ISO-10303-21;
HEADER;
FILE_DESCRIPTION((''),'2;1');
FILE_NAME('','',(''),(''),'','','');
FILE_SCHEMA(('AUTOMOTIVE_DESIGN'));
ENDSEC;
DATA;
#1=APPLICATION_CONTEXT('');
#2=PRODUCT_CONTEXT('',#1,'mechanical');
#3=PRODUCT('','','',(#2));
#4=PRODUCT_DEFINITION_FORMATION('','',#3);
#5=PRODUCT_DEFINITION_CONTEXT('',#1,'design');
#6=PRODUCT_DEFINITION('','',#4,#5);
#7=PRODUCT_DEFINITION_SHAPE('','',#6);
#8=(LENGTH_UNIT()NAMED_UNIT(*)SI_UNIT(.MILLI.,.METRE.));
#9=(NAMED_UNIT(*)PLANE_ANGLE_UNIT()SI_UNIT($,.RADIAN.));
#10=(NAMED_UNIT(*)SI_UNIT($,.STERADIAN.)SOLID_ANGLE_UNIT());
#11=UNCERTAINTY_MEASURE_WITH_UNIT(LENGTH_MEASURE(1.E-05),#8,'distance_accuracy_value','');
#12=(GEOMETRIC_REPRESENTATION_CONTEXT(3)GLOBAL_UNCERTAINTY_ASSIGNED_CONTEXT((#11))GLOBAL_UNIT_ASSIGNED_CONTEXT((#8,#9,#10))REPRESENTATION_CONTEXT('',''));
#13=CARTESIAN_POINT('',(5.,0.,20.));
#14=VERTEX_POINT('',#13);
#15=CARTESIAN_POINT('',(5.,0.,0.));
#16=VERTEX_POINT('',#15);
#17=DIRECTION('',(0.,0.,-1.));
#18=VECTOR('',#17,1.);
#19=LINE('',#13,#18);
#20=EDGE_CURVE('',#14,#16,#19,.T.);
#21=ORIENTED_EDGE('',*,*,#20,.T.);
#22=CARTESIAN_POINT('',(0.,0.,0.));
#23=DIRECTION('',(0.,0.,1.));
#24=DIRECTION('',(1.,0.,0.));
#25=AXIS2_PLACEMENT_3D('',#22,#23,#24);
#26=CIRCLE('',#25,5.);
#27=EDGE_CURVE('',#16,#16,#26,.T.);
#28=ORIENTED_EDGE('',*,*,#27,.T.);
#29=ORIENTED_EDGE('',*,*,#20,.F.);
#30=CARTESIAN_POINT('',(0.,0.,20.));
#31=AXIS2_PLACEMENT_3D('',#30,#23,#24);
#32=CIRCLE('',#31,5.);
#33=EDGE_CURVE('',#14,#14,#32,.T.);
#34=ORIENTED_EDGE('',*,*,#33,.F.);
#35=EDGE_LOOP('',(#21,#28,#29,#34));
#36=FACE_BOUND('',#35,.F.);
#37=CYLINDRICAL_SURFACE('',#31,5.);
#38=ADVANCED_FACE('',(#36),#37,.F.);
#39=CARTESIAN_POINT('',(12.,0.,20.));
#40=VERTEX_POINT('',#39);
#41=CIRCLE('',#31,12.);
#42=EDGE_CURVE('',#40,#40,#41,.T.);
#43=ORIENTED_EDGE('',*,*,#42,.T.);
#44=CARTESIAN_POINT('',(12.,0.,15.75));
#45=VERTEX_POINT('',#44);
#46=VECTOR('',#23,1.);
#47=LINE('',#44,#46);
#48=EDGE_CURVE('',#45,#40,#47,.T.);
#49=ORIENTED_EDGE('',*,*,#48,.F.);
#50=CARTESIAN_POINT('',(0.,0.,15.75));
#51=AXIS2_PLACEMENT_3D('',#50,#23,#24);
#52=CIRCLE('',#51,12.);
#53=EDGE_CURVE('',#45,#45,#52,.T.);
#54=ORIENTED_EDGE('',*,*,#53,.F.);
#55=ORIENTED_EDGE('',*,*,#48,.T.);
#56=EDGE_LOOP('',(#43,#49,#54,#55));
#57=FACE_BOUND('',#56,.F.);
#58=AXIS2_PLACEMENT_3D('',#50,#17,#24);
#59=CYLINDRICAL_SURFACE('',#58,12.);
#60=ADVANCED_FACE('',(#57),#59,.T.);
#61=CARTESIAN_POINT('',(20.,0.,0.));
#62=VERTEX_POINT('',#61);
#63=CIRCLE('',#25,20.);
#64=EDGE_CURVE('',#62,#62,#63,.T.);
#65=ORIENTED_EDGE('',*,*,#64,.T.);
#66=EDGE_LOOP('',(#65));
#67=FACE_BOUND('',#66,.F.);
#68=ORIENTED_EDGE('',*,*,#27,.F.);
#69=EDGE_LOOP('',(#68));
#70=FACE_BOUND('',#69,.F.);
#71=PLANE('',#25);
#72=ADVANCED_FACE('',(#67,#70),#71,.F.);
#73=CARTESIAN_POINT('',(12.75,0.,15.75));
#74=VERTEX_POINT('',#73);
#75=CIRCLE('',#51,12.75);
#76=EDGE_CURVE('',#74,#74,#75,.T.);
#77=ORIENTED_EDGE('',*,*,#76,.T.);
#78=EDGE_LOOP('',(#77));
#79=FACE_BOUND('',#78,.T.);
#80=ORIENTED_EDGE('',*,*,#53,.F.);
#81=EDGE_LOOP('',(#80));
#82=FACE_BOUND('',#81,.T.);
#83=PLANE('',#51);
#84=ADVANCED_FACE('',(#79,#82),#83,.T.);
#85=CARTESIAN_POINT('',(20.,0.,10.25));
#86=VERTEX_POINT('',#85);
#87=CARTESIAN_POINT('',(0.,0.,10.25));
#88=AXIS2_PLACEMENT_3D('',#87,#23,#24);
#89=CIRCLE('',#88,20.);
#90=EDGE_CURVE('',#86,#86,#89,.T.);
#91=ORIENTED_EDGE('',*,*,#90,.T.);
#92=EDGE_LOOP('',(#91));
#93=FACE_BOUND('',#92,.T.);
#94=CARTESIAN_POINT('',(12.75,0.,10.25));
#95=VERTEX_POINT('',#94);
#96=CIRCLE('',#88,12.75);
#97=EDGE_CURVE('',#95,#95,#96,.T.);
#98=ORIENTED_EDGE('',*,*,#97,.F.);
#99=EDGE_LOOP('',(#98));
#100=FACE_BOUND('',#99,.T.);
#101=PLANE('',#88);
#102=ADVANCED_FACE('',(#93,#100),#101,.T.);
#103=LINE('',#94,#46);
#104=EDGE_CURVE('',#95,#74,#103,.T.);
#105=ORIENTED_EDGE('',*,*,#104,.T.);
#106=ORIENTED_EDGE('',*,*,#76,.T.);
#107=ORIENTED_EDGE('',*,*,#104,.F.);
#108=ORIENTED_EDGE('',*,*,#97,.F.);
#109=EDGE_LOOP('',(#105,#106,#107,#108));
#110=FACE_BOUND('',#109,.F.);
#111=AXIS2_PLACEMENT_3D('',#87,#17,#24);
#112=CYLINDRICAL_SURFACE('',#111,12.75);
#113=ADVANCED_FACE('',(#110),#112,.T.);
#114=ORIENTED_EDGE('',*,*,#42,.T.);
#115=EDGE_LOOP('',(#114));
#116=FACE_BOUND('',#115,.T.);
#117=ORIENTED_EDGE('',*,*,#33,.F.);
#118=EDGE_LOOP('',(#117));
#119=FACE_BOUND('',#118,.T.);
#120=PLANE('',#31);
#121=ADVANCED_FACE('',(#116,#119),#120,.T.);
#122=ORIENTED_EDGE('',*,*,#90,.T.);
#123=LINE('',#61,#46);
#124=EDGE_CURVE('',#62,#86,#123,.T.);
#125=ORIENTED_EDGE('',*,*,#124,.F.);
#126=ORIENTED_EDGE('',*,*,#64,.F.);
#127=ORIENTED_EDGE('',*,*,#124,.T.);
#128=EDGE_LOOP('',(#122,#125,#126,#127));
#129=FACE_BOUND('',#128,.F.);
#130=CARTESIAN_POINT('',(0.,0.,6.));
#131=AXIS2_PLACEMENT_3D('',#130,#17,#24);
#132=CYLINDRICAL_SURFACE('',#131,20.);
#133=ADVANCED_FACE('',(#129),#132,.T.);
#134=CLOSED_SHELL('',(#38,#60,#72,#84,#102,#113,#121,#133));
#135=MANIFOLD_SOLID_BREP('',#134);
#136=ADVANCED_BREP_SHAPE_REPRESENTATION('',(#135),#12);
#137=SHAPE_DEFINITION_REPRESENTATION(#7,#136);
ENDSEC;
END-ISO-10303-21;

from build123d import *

# Parameters (mm, degrees)
F0_R     = 20
F1_DEPTH = 6
F2_DEPTH = 4.25
F3_R     = 12.75
F4_DEPTH = 5.5
F5_R     = 12
F6_DEPTH = 4.25
F7_R     = 5
F8_DEPTH = 73
F9_DEPTH = 20.001


# Not quite as in the source:
# - an extrude ends at something that could not be found from the text; its depth is read off the source's solid


with BuildPart() as f1:
    # F0 (on Top) → F1 (new body)
    with BuildSketch(Plane.XY):
        Circle(F0_R)
    extrude(amount=F1_DEPTH)

    # F2 (add): a face of the model
    f2_faces = [f1.faces().sort_by_distance(p)[0] for p in [
        (0, 0, 6),
    ]]
    extrude(f2_faces, amount=F2_DEPTH)

    # F3 (on face) → F4 (join)
    with BuildSketch(Plane.XY.offset(10.25)):
        Circle(F3_R)
    extrude(amount=F4_DEPTH)

    # F5 (on face) → F6 (join)
    with BuildSketch(Plane.XY.offset(15.75)):
        Circle(F5_R)
    extrude(amount=F6_DEPTH)

    # F7 (on face) → F8 (cut, through all)
    with BuildSketch(Plane.XY.offset(20)):
        Circle(F7_R)
    extrude(amount=F8_DEPTH, mode=Mode.SUBTRACT)

    # F7 (on face) → F9 (cut, through all)
    with BuildSketch(Plane.XY.offset(20)):
        Circle(F7_R)
    extrude(amount=-F9_DEPTH, mode=Mode.SUBTRACT)


solid = f1.part
